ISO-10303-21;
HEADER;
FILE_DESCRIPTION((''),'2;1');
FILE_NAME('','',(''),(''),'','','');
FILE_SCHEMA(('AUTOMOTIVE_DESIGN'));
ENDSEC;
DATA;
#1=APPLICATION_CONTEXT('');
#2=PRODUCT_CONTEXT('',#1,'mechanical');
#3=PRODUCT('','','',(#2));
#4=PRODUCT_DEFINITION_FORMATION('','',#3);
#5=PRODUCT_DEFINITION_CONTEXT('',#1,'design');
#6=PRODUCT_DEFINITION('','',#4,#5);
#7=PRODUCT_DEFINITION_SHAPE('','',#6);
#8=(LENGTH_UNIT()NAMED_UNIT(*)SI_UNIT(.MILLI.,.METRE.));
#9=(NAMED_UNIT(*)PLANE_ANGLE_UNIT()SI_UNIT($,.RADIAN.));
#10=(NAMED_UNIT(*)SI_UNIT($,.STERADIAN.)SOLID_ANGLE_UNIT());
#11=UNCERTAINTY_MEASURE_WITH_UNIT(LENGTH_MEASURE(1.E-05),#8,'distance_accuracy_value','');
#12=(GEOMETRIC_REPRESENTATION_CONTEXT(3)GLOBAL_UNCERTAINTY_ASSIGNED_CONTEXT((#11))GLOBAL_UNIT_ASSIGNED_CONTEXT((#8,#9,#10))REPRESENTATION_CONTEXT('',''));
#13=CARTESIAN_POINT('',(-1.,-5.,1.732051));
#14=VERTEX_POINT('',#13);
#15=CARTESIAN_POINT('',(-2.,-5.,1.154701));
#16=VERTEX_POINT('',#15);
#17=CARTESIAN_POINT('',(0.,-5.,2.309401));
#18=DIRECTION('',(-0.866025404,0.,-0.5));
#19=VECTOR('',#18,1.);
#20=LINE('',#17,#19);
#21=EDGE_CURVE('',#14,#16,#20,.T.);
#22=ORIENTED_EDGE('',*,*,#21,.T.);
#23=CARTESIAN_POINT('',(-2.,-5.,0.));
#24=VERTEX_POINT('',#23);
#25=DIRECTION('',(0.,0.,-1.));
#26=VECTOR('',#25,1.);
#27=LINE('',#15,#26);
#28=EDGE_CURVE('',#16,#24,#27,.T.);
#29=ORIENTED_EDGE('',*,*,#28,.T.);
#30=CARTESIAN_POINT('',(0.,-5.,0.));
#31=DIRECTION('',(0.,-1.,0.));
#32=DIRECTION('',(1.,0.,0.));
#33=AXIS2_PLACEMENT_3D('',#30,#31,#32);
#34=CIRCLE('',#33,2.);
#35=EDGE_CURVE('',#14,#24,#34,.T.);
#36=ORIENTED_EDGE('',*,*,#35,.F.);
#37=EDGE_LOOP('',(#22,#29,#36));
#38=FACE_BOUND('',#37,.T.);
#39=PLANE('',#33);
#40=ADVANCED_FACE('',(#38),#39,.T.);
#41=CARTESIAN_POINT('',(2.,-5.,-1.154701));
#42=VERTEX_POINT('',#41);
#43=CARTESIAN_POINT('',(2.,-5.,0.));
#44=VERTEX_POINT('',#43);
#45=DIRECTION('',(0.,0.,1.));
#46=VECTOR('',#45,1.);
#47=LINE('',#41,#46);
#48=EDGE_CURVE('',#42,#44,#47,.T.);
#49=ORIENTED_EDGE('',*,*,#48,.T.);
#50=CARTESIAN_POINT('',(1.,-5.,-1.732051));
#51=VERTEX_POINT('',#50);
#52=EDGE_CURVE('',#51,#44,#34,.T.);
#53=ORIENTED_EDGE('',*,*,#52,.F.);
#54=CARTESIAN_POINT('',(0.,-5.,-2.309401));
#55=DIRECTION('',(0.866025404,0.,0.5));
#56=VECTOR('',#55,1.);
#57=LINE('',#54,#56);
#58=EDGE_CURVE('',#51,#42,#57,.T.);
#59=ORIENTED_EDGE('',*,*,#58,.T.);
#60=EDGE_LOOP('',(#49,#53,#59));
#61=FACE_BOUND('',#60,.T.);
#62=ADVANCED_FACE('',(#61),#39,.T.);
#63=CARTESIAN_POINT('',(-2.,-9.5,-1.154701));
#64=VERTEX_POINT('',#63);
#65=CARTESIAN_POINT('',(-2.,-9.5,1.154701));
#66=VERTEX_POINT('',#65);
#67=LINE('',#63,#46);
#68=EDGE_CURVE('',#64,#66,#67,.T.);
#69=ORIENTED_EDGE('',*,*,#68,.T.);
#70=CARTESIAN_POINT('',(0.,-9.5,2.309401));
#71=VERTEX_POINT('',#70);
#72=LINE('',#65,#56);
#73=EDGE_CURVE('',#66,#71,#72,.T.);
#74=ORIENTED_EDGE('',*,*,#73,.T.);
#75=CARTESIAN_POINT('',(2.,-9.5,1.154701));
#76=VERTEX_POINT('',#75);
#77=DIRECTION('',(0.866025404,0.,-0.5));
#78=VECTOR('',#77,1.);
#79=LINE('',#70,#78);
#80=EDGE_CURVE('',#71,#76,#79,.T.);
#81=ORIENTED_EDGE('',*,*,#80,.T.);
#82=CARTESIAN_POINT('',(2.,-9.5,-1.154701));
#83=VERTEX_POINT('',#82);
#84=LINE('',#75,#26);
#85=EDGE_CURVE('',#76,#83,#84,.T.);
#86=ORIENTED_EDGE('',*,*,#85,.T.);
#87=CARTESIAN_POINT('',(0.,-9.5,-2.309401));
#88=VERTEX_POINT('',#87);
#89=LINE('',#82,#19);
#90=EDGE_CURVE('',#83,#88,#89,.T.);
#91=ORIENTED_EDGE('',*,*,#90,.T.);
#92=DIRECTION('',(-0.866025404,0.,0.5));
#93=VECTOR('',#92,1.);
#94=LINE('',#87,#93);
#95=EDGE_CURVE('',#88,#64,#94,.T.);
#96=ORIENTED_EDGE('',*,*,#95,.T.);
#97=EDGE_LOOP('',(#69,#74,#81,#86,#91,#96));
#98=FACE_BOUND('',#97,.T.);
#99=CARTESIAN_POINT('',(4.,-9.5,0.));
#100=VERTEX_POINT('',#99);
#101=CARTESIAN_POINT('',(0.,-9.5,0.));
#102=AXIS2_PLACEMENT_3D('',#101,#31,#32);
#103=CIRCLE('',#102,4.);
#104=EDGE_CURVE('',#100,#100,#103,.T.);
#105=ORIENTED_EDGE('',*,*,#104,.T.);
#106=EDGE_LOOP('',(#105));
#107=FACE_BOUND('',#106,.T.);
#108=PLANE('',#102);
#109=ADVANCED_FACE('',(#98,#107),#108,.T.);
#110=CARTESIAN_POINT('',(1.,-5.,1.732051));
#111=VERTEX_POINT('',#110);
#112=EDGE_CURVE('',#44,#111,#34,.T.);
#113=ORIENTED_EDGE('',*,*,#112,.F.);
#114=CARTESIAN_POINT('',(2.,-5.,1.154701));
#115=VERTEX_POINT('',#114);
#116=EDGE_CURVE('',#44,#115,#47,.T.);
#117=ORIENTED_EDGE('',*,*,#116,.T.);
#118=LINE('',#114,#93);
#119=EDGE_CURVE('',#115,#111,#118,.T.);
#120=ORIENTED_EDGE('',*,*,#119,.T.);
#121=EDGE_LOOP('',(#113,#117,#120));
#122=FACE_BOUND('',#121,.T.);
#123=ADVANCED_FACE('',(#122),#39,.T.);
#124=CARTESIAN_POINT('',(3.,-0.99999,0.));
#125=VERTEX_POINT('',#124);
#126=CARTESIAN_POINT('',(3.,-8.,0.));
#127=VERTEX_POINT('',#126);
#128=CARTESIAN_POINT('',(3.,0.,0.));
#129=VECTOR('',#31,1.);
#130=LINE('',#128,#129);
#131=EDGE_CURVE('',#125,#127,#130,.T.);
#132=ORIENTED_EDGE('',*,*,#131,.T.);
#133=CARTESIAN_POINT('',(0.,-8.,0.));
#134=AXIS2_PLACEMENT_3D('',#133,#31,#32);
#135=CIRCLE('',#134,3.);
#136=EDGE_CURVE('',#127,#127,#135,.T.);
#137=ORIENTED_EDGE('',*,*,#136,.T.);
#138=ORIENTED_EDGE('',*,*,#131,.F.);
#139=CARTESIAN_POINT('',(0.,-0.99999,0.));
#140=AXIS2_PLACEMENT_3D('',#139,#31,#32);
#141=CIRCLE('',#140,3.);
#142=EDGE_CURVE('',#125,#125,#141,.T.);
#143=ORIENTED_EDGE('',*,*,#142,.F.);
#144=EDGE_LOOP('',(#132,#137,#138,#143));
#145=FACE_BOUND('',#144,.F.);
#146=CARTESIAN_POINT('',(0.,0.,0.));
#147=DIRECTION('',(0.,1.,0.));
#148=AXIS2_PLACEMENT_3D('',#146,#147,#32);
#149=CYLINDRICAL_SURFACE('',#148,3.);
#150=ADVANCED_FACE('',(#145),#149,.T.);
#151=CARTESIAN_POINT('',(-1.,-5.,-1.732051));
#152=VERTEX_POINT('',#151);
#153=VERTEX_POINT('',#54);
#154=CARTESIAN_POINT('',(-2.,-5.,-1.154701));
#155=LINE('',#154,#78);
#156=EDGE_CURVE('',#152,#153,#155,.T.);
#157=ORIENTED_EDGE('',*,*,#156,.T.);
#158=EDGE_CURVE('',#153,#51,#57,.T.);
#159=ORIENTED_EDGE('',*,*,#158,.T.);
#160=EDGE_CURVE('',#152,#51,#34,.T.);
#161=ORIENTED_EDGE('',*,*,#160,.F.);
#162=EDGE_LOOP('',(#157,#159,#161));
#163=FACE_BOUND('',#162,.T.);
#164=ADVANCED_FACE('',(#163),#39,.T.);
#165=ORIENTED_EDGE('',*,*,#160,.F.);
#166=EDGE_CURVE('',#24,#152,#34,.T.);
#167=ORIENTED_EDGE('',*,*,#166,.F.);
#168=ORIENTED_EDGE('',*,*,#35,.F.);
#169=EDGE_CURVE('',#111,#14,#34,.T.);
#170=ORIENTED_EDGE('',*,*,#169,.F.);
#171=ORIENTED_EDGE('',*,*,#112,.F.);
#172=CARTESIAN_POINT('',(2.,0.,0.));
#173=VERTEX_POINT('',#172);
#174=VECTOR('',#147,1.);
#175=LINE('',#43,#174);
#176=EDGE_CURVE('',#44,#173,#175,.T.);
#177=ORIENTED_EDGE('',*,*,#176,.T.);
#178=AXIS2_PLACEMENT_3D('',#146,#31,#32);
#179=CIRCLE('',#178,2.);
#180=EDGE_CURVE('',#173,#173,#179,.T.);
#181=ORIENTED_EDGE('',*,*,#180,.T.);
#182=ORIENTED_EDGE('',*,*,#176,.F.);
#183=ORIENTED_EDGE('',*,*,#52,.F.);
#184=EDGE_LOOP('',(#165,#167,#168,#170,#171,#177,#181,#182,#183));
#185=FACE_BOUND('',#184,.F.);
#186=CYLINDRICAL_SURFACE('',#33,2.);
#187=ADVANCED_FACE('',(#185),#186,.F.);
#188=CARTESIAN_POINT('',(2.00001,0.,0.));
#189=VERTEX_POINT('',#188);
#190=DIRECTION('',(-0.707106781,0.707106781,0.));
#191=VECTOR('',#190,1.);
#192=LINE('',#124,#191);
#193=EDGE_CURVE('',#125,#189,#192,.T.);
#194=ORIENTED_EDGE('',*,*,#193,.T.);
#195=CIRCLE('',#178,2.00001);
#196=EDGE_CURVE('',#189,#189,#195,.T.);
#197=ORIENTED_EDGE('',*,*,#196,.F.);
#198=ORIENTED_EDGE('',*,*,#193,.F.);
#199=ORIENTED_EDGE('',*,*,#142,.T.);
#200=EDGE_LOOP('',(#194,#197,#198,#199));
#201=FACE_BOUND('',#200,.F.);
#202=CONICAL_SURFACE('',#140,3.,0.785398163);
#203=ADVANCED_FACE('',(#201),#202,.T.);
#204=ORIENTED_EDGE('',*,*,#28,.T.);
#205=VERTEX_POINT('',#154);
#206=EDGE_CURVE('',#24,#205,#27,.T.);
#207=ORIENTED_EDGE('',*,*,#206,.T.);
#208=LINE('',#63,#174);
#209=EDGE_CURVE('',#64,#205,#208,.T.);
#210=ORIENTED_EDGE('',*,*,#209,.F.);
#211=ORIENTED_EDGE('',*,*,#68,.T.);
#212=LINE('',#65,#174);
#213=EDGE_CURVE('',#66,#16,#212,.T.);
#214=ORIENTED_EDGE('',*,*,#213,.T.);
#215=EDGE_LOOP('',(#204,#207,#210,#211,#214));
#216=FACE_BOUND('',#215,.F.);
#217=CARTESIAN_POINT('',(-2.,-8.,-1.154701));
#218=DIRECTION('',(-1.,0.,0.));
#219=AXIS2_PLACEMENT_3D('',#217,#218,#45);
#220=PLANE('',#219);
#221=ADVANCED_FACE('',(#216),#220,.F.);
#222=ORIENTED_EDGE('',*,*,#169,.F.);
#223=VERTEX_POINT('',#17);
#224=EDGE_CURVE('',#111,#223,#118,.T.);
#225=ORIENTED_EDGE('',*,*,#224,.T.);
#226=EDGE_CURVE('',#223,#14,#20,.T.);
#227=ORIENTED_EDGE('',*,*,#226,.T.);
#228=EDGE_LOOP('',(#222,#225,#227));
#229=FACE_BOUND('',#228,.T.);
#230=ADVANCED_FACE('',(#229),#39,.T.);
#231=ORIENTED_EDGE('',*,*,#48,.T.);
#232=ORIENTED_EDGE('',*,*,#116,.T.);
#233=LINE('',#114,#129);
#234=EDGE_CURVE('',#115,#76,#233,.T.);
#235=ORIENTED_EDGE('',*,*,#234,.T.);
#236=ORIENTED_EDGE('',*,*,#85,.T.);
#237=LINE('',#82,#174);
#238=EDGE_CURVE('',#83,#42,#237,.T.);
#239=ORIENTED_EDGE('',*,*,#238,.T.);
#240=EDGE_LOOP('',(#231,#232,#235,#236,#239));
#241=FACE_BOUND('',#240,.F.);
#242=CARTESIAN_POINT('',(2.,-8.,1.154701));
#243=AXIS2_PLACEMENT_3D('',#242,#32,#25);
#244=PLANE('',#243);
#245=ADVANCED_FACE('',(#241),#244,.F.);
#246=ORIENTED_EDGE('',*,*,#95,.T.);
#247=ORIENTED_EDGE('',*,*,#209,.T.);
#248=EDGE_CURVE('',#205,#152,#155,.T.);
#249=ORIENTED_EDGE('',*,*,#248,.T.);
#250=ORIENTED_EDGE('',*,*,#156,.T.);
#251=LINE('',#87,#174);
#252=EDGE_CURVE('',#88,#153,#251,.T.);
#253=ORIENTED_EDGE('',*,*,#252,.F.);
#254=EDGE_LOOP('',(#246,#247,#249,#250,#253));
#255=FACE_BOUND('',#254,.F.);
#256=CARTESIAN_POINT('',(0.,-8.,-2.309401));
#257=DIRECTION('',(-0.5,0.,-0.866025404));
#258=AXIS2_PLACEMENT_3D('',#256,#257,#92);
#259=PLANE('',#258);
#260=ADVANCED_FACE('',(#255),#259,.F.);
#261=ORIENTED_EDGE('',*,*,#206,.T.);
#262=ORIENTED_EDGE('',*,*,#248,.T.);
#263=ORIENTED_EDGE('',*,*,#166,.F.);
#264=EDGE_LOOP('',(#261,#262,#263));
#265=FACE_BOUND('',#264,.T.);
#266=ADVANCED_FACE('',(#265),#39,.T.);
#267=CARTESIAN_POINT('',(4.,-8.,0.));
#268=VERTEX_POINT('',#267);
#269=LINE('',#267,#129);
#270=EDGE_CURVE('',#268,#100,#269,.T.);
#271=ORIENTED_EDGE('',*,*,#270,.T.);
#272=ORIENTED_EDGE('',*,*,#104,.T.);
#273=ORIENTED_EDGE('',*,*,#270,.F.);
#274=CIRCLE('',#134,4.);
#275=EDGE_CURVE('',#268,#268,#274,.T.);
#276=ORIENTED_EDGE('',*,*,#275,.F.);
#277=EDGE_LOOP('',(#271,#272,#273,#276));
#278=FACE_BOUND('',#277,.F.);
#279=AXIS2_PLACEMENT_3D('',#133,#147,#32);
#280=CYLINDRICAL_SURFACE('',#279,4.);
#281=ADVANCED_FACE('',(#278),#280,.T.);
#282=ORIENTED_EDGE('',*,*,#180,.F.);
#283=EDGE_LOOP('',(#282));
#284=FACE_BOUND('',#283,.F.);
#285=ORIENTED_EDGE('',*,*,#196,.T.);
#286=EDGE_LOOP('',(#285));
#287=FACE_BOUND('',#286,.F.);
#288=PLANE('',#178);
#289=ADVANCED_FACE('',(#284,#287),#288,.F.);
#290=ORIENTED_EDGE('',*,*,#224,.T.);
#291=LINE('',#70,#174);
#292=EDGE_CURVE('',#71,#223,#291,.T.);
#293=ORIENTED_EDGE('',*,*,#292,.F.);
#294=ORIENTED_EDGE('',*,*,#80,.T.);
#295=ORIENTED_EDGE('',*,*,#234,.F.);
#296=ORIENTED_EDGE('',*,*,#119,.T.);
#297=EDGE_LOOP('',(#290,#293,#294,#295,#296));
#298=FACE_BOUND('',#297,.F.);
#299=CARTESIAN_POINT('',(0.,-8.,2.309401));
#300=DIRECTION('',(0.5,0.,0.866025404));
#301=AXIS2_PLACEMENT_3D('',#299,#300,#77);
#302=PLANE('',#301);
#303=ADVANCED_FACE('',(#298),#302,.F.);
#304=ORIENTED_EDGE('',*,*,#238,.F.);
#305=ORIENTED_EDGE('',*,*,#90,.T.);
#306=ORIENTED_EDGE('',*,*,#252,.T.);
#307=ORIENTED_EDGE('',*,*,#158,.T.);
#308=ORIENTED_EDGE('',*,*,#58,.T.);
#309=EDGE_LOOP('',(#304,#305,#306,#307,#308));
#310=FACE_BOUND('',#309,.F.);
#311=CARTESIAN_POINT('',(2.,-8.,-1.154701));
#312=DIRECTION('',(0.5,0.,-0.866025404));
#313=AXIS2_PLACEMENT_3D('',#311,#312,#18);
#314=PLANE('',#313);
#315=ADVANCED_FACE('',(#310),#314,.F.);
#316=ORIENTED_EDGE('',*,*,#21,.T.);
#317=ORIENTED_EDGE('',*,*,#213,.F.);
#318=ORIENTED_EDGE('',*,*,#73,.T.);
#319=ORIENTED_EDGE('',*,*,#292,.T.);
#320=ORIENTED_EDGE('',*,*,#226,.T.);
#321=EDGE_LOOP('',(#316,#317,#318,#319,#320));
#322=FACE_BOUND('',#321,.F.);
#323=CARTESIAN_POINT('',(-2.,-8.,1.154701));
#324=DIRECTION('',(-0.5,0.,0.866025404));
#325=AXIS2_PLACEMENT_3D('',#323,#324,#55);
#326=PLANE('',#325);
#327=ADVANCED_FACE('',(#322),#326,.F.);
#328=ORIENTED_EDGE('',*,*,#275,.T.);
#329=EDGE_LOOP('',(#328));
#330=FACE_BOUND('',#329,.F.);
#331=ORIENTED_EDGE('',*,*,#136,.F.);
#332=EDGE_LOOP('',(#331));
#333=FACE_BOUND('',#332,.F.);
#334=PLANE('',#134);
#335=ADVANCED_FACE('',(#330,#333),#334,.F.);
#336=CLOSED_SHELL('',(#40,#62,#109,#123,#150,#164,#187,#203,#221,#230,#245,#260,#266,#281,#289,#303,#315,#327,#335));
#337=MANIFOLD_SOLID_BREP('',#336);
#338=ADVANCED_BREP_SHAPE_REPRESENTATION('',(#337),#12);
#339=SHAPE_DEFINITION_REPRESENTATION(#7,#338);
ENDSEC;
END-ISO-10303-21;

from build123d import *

# Parameters (mm, degrees)
F0_R     = 3
F1_DEPTH = 8
F3_DEPTH = 3
F4_R     = 2
F5_DEPTH = 25
F6_SIZE  = 0.99999
F7_R     = 4
F8_DEPTH = 1.5


# Not quite as in the source:
# - a fillet or chamfer is up to 0.001 mm smaller than in the source, because OpenCascade refuses the exact size


with BuildPart() as f1:
    # F0 (on Front) → F1 (new body)
    with BuildSketch(Plane.XZ):
        Circle(F0_R)
    extrude(amount=F1_DEPTH)

    # F2 (on face) → F3 (cut)
    with BuildSketch(Plane.XZ.offset(8)):
        Polygon((2, 1.1547005384), (0, 2.3094010768), (-2, 1.1547005384), (-2, -1.1547005384), (0, -2.3094010768), (2, -1.1547005384), align=None)
    extrude(amount=-F3_DEPTH, mode=Mode.SUBTRACT)

    # F4 (on face) → F5 (cut)
    with BuildSketch(Plane.XZ.offset(5)):
        Circle(F4_R)
    extrude(amount=-F5_DEPTH, mode=Mode.SUBTRACT)

    # F6 (size 1 in the source; OpenCascade refuses exactly that, so slightly less here)
    f6_edges = [f1.edges().sort_by_distance(p)[0] for p in [
        (-3, 0, 0),
    ]]
    chamfer(f6_edges, length=F6_SIZE)

    # F7 (on face) → F8 (join)
    with BuildSketch(Plane.XZ.offset(8)):
        Circle(F7_R)
        Polygon((2, 1.1547005384), (2, -1.1547005384), (0, -2.3094010768), (-2, -1.1547005384), (-2, 1.1547005384), (0, 2.3094010768), align=None, mode=Mode.SUBTRACT)
    extrude(amount=F8_DEPTH)


solid = f1.part
